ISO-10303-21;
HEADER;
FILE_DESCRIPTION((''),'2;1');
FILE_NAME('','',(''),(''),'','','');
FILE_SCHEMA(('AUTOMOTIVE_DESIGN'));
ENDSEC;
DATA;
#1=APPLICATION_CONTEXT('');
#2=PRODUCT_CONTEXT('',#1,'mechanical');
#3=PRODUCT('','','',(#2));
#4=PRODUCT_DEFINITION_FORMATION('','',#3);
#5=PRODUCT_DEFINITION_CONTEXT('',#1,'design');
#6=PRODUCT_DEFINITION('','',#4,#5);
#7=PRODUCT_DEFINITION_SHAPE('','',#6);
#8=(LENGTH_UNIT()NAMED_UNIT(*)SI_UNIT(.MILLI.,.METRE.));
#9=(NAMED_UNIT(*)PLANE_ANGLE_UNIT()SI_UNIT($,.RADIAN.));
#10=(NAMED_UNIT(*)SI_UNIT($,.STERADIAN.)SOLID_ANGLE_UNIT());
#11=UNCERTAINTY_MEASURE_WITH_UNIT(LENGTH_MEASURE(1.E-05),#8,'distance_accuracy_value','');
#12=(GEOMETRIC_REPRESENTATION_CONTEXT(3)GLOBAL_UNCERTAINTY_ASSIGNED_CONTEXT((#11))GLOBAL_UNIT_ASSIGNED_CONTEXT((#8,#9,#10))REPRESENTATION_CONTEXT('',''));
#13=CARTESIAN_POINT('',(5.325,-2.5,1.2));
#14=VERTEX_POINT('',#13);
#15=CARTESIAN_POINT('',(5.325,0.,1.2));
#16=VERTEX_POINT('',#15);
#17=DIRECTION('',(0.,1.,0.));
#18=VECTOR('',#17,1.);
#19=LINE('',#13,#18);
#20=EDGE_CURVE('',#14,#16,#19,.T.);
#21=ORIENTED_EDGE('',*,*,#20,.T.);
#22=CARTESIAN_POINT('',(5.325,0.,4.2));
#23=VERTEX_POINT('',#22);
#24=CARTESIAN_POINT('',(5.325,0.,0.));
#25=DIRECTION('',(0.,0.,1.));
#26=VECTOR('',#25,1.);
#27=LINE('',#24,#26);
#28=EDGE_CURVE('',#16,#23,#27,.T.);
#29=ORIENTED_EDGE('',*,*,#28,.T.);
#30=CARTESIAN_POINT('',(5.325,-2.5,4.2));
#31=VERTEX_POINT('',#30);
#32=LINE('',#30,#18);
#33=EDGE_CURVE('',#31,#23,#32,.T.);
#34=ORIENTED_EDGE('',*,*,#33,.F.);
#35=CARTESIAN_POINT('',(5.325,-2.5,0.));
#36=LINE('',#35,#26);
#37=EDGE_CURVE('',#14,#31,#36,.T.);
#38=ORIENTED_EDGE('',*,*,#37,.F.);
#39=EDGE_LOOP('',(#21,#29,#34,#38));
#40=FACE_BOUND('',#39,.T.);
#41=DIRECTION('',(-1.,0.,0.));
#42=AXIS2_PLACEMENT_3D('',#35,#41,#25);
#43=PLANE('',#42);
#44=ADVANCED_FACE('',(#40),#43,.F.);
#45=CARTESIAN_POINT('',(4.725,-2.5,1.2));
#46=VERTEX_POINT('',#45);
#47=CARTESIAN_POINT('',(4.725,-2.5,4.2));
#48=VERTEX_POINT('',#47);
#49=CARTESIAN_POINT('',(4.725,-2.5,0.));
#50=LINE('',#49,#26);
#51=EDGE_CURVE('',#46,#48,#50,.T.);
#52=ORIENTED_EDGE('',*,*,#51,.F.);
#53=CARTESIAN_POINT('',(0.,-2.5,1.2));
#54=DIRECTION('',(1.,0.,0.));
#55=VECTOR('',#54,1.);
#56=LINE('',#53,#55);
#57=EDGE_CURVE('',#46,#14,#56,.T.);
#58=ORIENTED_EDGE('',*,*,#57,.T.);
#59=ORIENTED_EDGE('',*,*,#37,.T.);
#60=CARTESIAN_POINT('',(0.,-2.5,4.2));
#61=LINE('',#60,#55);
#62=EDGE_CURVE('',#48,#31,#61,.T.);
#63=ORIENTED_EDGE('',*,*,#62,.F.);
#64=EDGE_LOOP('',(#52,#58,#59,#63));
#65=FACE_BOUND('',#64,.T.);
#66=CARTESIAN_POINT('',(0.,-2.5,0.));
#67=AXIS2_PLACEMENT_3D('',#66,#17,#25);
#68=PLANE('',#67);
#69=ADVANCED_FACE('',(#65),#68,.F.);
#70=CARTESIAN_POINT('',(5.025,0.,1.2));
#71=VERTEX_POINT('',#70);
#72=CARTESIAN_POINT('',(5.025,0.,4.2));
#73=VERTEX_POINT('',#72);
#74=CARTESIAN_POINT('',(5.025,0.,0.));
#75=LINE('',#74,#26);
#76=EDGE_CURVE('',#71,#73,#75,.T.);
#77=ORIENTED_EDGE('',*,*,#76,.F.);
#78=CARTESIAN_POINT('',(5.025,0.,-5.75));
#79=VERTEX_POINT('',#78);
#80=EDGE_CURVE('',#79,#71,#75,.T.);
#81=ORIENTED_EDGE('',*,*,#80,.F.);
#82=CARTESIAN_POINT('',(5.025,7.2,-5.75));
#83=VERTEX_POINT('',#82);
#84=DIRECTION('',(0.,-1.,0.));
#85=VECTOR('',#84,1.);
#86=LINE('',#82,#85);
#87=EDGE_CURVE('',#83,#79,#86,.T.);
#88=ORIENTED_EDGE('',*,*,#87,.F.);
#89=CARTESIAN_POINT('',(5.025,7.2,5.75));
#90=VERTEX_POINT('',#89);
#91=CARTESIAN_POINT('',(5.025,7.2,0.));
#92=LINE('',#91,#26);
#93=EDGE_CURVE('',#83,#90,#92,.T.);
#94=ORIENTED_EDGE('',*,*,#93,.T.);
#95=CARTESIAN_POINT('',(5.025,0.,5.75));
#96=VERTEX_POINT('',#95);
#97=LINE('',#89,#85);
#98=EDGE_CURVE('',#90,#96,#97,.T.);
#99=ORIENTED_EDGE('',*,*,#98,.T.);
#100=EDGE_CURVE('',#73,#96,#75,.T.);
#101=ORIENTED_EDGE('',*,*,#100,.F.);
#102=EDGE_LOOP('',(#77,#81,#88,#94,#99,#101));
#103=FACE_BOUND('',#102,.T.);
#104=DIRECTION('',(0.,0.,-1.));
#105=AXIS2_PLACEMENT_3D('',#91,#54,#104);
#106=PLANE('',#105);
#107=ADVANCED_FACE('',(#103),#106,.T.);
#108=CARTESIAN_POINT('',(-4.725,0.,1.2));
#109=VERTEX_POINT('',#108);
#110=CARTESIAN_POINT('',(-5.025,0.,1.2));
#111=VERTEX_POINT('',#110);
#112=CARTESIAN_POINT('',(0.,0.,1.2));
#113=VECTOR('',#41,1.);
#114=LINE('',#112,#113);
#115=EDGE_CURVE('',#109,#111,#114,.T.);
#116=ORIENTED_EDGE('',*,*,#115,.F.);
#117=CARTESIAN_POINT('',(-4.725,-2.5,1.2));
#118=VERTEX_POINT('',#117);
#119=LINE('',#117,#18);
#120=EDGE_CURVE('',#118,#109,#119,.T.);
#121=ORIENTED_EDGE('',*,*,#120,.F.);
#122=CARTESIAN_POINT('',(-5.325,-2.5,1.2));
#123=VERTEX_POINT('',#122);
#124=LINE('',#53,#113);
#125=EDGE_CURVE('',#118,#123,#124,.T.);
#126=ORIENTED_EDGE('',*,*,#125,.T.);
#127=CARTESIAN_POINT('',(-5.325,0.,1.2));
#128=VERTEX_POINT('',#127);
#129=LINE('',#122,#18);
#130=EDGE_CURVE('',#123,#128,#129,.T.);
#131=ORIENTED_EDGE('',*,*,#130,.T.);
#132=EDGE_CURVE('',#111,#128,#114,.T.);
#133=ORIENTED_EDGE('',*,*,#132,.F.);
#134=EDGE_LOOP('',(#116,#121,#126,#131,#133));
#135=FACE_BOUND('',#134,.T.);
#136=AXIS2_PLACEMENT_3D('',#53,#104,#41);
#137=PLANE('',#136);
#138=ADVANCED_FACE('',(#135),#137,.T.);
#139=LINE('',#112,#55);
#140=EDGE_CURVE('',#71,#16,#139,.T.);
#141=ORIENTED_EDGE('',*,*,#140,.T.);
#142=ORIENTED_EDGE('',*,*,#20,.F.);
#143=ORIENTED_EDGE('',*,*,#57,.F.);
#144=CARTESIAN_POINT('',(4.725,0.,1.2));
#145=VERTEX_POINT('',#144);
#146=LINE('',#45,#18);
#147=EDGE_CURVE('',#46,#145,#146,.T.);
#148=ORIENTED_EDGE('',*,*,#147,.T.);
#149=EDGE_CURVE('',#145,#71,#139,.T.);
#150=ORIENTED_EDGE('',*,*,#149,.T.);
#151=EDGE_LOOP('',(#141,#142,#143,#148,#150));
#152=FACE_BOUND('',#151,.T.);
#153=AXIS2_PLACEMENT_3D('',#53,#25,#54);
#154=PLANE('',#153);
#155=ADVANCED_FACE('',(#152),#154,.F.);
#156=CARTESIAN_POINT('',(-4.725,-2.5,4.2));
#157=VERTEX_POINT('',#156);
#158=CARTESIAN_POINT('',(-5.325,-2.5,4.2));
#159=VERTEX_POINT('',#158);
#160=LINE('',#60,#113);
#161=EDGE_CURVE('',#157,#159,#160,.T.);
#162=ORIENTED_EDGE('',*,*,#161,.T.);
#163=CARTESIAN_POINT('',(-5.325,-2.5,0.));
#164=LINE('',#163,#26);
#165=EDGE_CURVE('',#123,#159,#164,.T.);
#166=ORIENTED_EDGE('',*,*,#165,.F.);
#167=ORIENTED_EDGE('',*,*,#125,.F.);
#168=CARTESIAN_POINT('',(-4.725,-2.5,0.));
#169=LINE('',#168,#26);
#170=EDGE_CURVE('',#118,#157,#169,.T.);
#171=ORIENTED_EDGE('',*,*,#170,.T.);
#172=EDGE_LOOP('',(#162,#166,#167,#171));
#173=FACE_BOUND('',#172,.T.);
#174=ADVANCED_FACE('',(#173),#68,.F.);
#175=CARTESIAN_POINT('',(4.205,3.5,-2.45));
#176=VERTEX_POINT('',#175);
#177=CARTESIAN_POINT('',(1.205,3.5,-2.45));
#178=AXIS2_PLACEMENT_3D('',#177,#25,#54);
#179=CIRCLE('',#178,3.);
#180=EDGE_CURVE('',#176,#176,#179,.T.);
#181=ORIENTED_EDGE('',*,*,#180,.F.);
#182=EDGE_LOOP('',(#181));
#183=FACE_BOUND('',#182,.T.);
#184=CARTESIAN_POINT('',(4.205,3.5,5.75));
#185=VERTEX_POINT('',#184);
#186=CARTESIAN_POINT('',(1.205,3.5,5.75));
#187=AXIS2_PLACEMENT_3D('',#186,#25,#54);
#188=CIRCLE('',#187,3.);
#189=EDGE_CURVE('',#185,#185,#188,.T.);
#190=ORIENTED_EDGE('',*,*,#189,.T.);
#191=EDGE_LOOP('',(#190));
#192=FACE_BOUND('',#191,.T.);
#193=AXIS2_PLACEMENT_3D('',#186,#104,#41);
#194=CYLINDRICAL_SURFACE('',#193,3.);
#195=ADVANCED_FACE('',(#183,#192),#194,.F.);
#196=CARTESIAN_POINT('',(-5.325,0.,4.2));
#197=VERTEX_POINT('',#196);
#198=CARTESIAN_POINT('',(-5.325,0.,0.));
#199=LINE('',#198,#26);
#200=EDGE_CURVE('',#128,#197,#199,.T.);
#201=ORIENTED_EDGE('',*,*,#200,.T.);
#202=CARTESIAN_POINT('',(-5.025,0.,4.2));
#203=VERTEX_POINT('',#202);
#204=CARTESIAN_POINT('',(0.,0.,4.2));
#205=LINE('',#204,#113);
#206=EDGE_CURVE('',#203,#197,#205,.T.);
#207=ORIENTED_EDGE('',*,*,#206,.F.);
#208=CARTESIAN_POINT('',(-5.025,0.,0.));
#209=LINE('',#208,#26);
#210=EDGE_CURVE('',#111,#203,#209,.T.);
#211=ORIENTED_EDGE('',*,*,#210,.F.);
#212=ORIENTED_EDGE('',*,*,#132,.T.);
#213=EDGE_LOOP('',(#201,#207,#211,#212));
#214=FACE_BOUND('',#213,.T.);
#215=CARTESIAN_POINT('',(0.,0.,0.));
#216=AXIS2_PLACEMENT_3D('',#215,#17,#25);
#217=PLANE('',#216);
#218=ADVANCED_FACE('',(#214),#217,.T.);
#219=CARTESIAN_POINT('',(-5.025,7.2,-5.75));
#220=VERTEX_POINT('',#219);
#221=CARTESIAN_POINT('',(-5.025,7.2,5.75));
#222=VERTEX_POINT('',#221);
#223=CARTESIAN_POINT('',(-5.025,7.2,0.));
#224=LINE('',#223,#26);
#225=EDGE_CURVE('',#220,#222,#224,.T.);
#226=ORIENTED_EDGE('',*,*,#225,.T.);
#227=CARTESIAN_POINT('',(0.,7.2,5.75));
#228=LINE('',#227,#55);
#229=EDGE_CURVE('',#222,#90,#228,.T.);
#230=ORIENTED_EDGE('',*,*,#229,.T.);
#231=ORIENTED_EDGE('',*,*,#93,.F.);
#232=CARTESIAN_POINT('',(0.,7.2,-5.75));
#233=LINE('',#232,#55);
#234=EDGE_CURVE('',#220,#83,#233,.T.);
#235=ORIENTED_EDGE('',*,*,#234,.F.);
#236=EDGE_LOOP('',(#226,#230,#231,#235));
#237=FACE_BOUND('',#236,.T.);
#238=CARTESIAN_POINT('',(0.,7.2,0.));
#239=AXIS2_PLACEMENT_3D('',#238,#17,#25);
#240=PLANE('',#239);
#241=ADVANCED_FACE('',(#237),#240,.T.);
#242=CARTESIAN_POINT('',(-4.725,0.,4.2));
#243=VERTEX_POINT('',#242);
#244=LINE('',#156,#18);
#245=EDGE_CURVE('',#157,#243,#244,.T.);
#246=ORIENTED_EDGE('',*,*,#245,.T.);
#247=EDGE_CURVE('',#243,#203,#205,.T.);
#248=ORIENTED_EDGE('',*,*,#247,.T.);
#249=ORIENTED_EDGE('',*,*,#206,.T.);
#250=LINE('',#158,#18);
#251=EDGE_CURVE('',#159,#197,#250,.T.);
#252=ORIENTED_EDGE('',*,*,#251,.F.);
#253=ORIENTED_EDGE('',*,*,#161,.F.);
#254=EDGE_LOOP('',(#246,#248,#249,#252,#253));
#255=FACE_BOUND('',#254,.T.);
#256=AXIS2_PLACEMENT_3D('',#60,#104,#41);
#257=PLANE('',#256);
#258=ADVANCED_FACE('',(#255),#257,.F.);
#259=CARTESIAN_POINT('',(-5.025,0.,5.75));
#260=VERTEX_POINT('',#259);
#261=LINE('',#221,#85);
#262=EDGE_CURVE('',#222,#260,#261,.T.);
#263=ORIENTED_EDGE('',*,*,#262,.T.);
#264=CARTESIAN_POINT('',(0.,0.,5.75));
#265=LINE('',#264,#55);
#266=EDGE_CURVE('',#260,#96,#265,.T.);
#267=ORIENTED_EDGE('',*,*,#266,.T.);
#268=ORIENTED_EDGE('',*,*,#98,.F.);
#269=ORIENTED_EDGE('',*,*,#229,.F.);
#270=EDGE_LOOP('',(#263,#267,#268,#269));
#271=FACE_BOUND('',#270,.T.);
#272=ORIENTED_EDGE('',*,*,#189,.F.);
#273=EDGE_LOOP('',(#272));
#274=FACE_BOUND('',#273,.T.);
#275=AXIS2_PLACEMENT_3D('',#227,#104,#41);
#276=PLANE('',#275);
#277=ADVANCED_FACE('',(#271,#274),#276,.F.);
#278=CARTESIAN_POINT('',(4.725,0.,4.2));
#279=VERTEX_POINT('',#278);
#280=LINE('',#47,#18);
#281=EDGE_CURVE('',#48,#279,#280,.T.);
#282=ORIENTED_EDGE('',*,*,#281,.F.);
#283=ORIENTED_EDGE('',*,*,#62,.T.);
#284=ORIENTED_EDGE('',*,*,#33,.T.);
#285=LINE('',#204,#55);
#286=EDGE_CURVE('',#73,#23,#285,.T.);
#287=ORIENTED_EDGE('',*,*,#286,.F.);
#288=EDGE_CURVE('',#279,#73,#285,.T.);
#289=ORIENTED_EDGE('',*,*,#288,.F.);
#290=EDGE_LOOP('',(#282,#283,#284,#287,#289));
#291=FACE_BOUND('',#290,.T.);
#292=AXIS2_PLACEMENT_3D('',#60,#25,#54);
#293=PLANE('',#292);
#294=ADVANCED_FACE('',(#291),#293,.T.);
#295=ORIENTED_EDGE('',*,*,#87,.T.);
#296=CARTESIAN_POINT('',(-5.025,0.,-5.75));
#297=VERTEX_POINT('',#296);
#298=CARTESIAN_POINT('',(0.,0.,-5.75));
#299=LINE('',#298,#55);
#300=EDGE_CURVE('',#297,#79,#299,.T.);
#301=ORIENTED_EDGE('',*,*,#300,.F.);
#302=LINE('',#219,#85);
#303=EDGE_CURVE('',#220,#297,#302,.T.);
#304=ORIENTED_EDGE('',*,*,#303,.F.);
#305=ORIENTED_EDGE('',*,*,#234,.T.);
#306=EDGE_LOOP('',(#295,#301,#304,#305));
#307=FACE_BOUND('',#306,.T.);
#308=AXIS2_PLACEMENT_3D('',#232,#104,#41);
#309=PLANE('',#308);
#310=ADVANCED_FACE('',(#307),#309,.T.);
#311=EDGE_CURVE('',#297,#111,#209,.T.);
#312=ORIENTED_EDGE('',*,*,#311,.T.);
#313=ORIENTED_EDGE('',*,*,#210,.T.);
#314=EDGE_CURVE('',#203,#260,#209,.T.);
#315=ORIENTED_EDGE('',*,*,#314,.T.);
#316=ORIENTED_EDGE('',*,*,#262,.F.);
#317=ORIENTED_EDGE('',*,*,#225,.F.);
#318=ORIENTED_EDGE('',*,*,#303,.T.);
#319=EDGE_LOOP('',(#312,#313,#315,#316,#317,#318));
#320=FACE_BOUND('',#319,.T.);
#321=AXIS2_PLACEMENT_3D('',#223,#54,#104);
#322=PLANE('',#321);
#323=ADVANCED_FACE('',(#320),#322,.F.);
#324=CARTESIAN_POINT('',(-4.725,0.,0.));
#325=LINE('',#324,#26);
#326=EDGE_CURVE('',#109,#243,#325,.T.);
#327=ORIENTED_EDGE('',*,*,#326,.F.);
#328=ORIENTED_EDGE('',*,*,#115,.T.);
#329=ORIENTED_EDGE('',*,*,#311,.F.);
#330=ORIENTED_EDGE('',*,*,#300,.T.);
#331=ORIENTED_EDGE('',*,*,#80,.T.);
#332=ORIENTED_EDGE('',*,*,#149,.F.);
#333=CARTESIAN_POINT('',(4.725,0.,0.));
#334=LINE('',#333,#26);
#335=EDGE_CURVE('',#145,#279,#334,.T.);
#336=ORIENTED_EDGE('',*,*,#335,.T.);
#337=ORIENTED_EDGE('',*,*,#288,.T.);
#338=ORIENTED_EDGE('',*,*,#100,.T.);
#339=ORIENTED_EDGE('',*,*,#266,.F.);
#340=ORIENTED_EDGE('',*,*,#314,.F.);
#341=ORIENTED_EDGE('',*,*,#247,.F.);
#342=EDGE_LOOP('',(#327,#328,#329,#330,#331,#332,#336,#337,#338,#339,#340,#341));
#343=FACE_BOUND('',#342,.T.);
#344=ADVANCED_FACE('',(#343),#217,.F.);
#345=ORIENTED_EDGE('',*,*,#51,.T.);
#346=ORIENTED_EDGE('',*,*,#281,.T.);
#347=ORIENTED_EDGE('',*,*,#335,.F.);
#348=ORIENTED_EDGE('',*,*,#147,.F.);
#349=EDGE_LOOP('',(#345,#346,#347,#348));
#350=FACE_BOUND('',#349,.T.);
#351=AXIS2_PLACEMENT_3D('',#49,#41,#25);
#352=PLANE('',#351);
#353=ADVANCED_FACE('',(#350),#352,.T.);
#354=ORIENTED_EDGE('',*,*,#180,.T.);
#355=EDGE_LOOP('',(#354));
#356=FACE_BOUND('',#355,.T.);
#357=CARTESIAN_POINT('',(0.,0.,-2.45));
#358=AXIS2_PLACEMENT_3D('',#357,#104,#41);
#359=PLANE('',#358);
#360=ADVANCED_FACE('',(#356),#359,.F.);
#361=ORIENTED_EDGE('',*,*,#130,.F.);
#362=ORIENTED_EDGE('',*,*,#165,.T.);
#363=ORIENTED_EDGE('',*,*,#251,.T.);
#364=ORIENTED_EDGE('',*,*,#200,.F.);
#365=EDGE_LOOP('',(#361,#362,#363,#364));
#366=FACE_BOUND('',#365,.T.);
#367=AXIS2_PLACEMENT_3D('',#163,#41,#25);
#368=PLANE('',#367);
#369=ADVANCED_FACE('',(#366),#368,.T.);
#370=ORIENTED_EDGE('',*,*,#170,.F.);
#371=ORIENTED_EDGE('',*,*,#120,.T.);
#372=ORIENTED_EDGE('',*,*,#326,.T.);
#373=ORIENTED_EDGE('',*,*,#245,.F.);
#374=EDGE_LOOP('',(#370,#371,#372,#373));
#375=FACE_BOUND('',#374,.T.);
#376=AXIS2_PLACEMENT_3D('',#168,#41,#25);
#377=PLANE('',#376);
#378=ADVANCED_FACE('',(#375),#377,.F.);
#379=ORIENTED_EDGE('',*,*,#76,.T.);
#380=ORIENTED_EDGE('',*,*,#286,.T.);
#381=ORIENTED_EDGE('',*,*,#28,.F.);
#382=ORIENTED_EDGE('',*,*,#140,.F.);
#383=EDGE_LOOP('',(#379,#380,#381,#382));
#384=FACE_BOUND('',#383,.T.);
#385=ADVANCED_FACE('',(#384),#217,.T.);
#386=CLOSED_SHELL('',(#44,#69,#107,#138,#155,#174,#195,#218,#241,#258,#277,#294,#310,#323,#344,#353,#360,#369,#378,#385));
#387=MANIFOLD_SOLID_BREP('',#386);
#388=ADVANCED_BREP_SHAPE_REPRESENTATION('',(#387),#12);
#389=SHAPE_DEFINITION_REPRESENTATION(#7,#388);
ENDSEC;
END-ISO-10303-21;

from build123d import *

# Parameters (mm, degrees)
SKETCH1_W             = 0.6
SKETCH1_H             = 3
BOSS_EXTRUDE1_DEPTH   = 2.5
BOSS_EXTRUDE1_2_DEPTH = 2.5
SKETCH1_3_W           = 10.05
SKETCH1_3_H           = 11.5
BOSS_EXTRUDE2_DEPTH   = 7.2
F_3DSKETCH2_R         = 3
CUT_EXTRUDE1_DEPTH    = 8.2


with BuildPart() as part:
    # Sketch1 → Boss-Extrude1 (new body)
    with BuildSketch(Plane(origin=(0, 0, 0), x_dir=(1, 0, 0), z_dir=(0, 1, 0))):
        with Locations((-5.025, -2.7)):
            Rectangle(SKETCH1_W, SKETCH1_H)
    extrude(amount=-BOSS_EXTRUDE1_DEPTH)



with BuildPart() as body_2:
    # Sketch1 → Boss-Extrude1 2 (new body)
    with BuildSketch(Plane(origin=(0, 0, 0), x_dir=(1, 0, 0), z_dir=(0, 1, 0))):
        with Locations((5.025, -2.7)):
            Rectangle(SKETCH1_W, SKETCH1_H)
    extrude(amount=-BOSS_EXTRUDE1_2_DEPTH)


with BuildPart() as part_1:
    add(part.part)

    add(body_2.part)  # Boss-Extrude2 merges body 2
    # Sketch1<3> → Boss-Extrude2 (add)
    with BuildSketch(Plane(origin=(0, 0, 0), x_dir=(1, 0, 0), z_dir=(0, 1, 0))):
        Rectangle(SKETCH1_3_W, SKETCH1_3_H)
    extrude(amount=BOSS_EXTRUDE2_DEPTH)

    # 3DSketch2 → Cut-Extrude1 (cut)
    with BuildSketch(Plane(origin=(1.205, 3.5, 5.75), x_dir=(-1, 0, 0), z_dir=(0, 0, -1))):
        Circle(F_3DSKETCH2_R)
    extrude(amount=CUT_EXTRUDE1_DEPTH, mode=Mode.SUBTRACT)


solid = part_1.part
